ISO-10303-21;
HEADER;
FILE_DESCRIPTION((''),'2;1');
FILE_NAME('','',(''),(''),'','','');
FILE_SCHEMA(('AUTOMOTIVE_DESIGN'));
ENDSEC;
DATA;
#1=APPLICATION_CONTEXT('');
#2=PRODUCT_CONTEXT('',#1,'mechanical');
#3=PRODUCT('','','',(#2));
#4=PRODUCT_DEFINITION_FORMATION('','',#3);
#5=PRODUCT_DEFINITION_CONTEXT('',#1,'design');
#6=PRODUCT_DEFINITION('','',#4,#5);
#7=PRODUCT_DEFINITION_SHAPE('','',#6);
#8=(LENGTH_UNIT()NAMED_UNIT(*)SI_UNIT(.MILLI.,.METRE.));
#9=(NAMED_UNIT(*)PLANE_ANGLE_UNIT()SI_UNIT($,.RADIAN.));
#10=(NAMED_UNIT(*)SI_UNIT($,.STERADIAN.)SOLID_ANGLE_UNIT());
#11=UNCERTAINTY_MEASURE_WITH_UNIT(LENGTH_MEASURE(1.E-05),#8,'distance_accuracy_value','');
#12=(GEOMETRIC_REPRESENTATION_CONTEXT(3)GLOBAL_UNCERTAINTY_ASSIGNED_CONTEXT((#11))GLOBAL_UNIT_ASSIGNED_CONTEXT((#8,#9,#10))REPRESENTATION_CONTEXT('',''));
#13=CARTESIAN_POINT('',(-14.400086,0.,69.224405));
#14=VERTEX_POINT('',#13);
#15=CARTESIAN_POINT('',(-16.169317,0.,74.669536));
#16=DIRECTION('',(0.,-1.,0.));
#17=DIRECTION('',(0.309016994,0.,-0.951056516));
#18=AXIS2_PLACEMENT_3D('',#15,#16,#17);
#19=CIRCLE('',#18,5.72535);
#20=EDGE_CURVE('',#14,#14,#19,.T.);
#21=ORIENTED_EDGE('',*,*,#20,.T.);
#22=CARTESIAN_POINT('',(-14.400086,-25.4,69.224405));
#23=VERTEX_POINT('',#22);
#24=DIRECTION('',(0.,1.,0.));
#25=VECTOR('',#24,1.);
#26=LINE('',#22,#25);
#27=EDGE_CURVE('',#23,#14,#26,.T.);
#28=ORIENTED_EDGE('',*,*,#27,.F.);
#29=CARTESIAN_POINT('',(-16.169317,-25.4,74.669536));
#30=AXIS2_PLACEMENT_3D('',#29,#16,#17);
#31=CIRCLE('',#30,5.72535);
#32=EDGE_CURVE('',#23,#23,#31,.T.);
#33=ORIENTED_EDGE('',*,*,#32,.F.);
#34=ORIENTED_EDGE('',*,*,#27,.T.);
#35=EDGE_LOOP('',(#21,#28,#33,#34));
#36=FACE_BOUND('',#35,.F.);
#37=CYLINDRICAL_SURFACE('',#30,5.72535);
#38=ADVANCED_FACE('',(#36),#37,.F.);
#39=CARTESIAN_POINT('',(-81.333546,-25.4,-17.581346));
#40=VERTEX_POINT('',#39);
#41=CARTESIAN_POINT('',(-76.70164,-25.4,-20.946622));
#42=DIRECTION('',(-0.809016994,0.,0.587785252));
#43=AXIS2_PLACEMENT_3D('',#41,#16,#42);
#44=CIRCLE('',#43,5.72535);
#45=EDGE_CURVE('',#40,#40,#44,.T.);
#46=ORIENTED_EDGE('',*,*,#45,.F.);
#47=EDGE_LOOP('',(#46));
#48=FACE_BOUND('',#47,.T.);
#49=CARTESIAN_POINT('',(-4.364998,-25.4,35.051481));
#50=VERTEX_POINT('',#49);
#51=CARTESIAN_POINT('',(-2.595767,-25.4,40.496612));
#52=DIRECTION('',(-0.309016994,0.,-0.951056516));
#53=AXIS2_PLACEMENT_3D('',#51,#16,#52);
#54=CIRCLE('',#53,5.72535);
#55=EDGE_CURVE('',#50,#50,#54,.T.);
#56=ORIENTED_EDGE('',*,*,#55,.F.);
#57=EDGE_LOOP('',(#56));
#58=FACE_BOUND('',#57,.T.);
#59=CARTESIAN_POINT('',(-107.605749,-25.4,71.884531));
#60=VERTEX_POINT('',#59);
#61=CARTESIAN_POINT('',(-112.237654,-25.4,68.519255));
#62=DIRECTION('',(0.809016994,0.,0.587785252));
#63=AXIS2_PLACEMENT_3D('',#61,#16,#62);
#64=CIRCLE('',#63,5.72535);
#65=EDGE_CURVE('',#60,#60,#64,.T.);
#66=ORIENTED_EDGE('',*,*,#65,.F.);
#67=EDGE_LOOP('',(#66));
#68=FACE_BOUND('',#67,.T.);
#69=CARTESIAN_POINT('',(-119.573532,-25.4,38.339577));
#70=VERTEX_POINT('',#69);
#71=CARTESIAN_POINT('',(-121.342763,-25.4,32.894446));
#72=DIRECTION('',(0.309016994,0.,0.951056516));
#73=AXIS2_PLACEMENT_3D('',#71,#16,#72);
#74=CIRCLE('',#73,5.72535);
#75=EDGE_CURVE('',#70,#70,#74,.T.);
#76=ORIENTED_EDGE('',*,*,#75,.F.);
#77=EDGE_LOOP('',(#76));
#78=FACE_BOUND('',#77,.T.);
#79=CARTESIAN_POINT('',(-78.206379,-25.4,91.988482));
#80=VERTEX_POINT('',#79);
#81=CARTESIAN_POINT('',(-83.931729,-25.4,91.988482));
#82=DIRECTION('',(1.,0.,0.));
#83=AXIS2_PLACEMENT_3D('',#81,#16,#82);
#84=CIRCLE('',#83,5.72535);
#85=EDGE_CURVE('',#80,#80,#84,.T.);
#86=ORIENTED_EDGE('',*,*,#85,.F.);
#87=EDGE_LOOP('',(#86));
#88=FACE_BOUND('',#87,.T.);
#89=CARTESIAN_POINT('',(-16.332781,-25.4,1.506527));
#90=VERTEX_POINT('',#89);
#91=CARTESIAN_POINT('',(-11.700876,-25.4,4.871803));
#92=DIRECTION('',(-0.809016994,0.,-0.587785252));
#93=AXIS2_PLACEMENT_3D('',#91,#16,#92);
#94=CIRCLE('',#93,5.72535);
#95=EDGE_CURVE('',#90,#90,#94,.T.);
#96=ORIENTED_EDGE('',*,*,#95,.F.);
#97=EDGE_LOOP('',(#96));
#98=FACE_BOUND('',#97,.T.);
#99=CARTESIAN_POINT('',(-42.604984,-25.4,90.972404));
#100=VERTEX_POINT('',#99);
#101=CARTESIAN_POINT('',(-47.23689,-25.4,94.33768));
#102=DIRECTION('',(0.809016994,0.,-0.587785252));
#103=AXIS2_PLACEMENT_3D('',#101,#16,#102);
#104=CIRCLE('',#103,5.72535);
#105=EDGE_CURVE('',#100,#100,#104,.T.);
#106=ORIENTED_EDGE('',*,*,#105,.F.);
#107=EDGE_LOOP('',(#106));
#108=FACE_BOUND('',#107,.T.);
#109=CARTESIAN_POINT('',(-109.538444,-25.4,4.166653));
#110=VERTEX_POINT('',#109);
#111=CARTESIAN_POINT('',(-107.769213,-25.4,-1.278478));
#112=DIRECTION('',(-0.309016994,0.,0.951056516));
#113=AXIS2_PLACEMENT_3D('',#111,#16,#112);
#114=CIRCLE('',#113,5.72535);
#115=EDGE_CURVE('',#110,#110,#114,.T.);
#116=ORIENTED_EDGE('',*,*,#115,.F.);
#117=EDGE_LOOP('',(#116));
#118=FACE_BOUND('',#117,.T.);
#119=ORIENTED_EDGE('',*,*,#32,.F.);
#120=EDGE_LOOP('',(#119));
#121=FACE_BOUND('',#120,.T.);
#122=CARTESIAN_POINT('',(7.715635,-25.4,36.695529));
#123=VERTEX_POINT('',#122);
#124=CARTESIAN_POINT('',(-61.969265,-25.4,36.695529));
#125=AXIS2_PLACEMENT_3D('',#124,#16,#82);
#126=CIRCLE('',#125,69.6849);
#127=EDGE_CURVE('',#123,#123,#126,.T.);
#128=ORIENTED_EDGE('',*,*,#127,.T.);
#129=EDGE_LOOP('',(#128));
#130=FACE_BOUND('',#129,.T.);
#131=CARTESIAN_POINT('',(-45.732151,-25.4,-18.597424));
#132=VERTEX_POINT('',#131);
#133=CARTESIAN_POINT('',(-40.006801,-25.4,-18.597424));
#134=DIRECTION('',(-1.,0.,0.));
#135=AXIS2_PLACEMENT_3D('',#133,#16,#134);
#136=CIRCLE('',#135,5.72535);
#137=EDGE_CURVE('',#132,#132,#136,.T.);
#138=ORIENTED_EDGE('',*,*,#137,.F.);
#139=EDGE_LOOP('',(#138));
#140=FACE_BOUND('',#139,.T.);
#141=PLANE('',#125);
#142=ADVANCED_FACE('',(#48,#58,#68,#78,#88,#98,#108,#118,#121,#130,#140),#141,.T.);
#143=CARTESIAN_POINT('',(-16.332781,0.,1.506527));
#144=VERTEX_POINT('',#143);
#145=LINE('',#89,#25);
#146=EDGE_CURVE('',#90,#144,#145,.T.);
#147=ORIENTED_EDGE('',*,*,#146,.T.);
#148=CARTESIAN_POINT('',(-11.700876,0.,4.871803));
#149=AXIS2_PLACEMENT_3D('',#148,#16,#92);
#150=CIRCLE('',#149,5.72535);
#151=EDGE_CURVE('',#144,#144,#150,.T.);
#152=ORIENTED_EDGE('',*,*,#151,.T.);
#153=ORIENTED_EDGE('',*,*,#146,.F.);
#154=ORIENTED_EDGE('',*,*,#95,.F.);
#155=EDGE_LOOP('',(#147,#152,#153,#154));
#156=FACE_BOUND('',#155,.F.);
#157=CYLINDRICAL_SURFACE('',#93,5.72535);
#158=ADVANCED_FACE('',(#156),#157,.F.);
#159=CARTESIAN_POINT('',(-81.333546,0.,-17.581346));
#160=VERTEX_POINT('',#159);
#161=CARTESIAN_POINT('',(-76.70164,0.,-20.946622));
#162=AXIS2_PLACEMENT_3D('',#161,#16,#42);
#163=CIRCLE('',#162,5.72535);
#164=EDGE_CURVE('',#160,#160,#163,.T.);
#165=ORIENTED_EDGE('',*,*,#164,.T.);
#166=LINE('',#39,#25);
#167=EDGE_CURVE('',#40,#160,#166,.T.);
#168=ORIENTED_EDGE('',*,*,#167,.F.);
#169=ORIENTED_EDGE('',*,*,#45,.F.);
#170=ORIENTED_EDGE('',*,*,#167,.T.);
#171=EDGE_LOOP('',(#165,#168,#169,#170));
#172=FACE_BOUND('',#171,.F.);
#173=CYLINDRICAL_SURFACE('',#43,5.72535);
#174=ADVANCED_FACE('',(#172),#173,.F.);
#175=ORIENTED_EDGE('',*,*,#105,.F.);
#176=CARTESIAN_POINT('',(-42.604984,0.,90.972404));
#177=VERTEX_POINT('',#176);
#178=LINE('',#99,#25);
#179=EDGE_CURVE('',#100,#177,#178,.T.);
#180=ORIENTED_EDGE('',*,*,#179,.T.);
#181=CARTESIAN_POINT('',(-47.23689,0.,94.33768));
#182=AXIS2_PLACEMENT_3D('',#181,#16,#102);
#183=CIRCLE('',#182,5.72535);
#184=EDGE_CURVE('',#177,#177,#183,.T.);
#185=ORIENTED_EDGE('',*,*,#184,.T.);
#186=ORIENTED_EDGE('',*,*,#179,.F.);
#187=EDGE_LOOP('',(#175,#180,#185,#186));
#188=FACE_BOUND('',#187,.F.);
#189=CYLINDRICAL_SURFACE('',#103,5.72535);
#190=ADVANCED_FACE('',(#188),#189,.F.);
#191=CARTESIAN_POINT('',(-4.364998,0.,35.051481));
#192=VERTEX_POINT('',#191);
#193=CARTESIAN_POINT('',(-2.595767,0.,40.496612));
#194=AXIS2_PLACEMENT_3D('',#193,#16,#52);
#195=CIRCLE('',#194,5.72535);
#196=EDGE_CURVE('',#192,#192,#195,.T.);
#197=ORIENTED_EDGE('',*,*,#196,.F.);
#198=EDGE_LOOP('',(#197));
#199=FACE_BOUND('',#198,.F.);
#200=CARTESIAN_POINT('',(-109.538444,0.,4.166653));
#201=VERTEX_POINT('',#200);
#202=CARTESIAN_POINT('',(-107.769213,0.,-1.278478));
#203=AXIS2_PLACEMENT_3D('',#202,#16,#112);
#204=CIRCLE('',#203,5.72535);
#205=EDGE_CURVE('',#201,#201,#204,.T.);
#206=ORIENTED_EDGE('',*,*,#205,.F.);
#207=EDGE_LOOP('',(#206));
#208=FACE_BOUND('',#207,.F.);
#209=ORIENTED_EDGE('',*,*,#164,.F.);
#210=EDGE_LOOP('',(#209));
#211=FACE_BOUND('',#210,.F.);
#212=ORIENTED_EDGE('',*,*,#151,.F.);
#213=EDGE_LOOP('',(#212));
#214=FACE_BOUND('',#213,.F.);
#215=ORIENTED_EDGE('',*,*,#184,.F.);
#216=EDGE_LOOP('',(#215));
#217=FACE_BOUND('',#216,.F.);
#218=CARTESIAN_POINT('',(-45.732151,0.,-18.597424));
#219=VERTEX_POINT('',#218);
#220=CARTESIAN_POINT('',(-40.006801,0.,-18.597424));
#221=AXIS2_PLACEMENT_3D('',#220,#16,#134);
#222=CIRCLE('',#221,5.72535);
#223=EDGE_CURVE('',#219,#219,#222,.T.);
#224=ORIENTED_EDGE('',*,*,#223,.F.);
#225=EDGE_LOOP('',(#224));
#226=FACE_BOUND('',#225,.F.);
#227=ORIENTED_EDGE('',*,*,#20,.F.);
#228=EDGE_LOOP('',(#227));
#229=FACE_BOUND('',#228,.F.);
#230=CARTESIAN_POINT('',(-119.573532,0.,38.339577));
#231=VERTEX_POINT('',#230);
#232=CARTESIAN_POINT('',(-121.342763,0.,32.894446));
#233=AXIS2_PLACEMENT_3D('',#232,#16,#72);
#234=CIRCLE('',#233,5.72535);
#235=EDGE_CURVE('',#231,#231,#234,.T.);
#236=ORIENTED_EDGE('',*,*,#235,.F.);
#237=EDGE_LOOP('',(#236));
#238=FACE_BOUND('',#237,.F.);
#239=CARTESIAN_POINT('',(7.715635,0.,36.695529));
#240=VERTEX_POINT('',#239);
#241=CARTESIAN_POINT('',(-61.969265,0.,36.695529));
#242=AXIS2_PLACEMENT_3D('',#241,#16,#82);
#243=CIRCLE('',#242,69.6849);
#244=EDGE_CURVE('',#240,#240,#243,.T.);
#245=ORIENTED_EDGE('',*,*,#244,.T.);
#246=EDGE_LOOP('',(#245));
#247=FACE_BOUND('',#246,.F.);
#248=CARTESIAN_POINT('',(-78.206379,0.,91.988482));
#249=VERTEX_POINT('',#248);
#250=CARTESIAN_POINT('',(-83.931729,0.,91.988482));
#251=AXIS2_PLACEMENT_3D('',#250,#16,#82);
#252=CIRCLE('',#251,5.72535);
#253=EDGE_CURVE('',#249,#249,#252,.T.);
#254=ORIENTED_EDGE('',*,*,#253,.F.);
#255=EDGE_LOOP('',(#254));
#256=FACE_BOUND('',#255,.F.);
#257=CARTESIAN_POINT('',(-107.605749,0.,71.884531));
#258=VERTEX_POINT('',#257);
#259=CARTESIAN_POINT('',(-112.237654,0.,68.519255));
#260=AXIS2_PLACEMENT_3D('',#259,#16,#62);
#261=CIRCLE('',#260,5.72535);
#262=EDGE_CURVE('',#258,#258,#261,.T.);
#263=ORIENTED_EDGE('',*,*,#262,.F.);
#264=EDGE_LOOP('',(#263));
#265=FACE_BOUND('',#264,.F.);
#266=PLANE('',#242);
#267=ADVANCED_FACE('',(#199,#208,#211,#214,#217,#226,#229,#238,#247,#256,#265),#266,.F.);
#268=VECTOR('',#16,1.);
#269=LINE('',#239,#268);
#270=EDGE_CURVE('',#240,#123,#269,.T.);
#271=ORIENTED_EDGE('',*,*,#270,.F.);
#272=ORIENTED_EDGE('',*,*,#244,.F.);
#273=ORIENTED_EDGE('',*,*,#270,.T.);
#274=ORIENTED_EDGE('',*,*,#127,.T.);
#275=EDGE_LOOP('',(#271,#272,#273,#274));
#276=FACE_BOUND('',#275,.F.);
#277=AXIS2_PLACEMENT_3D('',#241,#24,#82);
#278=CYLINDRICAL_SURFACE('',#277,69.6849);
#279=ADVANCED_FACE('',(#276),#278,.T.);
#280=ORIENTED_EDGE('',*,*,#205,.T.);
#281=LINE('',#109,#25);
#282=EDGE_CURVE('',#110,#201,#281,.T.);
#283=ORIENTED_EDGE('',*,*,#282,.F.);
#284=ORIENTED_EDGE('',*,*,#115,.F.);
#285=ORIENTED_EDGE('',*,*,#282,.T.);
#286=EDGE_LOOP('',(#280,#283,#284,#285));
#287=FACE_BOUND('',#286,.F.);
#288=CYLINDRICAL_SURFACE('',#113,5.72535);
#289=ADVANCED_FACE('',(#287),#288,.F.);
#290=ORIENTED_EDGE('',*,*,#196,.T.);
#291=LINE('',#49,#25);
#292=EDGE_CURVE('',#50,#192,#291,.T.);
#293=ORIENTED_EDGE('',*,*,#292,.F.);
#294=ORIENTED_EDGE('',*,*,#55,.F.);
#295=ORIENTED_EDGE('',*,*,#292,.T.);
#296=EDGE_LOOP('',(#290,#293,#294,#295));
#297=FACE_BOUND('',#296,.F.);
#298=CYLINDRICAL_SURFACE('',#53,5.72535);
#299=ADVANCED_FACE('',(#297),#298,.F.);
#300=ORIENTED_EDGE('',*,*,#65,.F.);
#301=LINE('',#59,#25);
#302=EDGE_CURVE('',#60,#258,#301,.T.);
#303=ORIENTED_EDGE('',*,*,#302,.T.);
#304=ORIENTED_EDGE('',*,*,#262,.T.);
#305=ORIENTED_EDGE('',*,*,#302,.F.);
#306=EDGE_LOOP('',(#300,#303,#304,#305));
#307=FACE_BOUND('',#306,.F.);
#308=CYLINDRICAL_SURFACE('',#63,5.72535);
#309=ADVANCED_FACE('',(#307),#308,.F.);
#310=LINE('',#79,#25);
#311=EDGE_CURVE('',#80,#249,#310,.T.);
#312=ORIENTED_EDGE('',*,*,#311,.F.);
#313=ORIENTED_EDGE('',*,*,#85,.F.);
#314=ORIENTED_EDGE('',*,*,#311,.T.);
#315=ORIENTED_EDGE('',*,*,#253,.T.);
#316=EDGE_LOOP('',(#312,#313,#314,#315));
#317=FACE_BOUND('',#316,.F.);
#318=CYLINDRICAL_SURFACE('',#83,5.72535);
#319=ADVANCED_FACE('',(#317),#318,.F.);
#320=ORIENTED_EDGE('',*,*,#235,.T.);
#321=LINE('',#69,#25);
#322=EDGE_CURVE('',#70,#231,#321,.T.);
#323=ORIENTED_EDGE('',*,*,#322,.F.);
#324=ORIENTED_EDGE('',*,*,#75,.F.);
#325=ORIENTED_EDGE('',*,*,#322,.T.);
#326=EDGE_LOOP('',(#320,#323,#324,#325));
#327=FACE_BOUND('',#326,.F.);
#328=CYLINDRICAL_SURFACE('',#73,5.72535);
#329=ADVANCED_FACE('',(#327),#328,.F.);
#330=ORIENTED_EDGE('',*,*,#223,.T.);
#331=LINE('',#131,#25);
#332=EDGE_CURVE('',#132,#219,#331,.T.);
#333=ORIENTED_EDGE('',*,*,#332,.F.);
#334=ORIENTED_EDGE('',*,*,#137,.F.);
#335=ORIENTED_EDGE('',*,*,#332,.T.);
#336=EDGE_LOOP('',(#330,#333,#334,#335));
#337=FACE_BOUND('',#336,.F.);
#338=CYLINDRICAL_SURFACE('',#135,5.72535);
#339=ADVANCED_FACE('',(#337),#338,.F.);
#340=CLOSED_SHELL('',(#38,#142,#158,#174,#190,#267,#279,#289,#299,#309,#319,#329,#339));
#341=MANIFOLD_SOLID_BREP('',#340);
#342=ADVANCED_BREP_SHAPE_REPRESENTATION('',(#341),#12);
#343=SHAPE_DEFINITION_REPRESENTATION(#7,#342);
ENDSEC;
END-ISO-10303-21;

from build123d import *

# Parameters (mm, degrees)
F0_R            = 69.6849
F1_DEPTH        = 25.4
F2_R            = 5.7253497259
F3_DEPTH        = 25.401
F3_COPIES_COUNT = 10


# Not quite as in the source:
# - a pattern or mirror of a feature is missing from the dataset's text; its kind, count and spacing are read off the source's solid


with BuildPart() as f1:
    # F0 (on Front) → F1 (new body)
    with BuildSketch(Plane.XZ):
        with Locations((-61.9692653418, 36.6955287755)):
            Circle(F0_R)
    extrude(amount=F1_DEPTH)

    # F2 (on face) → F3 (cut, through all)
    with BuildSketch(Plane.XZ.offset(25.4)):
        with Locations((-83.9317291975, 91.9884815812)):
            Circle(F2_R)
    f3 = extrude(amount=-F3_DEPTH, mode=Mode.SUBTRACT)

    # F3_copies: F3 ×10 about axis
    f3_copies_axis = Axis((-61.969265, 0, 36.695529), (0, 1, 0))
    for i in range(1, F3_COPIES_COUNT):
        add(f3.rotate(f3_copies_axis, i * 360 / F3_COPIES_COUNT), mode=Mode.SUBTRACT)


solid = f1.part
